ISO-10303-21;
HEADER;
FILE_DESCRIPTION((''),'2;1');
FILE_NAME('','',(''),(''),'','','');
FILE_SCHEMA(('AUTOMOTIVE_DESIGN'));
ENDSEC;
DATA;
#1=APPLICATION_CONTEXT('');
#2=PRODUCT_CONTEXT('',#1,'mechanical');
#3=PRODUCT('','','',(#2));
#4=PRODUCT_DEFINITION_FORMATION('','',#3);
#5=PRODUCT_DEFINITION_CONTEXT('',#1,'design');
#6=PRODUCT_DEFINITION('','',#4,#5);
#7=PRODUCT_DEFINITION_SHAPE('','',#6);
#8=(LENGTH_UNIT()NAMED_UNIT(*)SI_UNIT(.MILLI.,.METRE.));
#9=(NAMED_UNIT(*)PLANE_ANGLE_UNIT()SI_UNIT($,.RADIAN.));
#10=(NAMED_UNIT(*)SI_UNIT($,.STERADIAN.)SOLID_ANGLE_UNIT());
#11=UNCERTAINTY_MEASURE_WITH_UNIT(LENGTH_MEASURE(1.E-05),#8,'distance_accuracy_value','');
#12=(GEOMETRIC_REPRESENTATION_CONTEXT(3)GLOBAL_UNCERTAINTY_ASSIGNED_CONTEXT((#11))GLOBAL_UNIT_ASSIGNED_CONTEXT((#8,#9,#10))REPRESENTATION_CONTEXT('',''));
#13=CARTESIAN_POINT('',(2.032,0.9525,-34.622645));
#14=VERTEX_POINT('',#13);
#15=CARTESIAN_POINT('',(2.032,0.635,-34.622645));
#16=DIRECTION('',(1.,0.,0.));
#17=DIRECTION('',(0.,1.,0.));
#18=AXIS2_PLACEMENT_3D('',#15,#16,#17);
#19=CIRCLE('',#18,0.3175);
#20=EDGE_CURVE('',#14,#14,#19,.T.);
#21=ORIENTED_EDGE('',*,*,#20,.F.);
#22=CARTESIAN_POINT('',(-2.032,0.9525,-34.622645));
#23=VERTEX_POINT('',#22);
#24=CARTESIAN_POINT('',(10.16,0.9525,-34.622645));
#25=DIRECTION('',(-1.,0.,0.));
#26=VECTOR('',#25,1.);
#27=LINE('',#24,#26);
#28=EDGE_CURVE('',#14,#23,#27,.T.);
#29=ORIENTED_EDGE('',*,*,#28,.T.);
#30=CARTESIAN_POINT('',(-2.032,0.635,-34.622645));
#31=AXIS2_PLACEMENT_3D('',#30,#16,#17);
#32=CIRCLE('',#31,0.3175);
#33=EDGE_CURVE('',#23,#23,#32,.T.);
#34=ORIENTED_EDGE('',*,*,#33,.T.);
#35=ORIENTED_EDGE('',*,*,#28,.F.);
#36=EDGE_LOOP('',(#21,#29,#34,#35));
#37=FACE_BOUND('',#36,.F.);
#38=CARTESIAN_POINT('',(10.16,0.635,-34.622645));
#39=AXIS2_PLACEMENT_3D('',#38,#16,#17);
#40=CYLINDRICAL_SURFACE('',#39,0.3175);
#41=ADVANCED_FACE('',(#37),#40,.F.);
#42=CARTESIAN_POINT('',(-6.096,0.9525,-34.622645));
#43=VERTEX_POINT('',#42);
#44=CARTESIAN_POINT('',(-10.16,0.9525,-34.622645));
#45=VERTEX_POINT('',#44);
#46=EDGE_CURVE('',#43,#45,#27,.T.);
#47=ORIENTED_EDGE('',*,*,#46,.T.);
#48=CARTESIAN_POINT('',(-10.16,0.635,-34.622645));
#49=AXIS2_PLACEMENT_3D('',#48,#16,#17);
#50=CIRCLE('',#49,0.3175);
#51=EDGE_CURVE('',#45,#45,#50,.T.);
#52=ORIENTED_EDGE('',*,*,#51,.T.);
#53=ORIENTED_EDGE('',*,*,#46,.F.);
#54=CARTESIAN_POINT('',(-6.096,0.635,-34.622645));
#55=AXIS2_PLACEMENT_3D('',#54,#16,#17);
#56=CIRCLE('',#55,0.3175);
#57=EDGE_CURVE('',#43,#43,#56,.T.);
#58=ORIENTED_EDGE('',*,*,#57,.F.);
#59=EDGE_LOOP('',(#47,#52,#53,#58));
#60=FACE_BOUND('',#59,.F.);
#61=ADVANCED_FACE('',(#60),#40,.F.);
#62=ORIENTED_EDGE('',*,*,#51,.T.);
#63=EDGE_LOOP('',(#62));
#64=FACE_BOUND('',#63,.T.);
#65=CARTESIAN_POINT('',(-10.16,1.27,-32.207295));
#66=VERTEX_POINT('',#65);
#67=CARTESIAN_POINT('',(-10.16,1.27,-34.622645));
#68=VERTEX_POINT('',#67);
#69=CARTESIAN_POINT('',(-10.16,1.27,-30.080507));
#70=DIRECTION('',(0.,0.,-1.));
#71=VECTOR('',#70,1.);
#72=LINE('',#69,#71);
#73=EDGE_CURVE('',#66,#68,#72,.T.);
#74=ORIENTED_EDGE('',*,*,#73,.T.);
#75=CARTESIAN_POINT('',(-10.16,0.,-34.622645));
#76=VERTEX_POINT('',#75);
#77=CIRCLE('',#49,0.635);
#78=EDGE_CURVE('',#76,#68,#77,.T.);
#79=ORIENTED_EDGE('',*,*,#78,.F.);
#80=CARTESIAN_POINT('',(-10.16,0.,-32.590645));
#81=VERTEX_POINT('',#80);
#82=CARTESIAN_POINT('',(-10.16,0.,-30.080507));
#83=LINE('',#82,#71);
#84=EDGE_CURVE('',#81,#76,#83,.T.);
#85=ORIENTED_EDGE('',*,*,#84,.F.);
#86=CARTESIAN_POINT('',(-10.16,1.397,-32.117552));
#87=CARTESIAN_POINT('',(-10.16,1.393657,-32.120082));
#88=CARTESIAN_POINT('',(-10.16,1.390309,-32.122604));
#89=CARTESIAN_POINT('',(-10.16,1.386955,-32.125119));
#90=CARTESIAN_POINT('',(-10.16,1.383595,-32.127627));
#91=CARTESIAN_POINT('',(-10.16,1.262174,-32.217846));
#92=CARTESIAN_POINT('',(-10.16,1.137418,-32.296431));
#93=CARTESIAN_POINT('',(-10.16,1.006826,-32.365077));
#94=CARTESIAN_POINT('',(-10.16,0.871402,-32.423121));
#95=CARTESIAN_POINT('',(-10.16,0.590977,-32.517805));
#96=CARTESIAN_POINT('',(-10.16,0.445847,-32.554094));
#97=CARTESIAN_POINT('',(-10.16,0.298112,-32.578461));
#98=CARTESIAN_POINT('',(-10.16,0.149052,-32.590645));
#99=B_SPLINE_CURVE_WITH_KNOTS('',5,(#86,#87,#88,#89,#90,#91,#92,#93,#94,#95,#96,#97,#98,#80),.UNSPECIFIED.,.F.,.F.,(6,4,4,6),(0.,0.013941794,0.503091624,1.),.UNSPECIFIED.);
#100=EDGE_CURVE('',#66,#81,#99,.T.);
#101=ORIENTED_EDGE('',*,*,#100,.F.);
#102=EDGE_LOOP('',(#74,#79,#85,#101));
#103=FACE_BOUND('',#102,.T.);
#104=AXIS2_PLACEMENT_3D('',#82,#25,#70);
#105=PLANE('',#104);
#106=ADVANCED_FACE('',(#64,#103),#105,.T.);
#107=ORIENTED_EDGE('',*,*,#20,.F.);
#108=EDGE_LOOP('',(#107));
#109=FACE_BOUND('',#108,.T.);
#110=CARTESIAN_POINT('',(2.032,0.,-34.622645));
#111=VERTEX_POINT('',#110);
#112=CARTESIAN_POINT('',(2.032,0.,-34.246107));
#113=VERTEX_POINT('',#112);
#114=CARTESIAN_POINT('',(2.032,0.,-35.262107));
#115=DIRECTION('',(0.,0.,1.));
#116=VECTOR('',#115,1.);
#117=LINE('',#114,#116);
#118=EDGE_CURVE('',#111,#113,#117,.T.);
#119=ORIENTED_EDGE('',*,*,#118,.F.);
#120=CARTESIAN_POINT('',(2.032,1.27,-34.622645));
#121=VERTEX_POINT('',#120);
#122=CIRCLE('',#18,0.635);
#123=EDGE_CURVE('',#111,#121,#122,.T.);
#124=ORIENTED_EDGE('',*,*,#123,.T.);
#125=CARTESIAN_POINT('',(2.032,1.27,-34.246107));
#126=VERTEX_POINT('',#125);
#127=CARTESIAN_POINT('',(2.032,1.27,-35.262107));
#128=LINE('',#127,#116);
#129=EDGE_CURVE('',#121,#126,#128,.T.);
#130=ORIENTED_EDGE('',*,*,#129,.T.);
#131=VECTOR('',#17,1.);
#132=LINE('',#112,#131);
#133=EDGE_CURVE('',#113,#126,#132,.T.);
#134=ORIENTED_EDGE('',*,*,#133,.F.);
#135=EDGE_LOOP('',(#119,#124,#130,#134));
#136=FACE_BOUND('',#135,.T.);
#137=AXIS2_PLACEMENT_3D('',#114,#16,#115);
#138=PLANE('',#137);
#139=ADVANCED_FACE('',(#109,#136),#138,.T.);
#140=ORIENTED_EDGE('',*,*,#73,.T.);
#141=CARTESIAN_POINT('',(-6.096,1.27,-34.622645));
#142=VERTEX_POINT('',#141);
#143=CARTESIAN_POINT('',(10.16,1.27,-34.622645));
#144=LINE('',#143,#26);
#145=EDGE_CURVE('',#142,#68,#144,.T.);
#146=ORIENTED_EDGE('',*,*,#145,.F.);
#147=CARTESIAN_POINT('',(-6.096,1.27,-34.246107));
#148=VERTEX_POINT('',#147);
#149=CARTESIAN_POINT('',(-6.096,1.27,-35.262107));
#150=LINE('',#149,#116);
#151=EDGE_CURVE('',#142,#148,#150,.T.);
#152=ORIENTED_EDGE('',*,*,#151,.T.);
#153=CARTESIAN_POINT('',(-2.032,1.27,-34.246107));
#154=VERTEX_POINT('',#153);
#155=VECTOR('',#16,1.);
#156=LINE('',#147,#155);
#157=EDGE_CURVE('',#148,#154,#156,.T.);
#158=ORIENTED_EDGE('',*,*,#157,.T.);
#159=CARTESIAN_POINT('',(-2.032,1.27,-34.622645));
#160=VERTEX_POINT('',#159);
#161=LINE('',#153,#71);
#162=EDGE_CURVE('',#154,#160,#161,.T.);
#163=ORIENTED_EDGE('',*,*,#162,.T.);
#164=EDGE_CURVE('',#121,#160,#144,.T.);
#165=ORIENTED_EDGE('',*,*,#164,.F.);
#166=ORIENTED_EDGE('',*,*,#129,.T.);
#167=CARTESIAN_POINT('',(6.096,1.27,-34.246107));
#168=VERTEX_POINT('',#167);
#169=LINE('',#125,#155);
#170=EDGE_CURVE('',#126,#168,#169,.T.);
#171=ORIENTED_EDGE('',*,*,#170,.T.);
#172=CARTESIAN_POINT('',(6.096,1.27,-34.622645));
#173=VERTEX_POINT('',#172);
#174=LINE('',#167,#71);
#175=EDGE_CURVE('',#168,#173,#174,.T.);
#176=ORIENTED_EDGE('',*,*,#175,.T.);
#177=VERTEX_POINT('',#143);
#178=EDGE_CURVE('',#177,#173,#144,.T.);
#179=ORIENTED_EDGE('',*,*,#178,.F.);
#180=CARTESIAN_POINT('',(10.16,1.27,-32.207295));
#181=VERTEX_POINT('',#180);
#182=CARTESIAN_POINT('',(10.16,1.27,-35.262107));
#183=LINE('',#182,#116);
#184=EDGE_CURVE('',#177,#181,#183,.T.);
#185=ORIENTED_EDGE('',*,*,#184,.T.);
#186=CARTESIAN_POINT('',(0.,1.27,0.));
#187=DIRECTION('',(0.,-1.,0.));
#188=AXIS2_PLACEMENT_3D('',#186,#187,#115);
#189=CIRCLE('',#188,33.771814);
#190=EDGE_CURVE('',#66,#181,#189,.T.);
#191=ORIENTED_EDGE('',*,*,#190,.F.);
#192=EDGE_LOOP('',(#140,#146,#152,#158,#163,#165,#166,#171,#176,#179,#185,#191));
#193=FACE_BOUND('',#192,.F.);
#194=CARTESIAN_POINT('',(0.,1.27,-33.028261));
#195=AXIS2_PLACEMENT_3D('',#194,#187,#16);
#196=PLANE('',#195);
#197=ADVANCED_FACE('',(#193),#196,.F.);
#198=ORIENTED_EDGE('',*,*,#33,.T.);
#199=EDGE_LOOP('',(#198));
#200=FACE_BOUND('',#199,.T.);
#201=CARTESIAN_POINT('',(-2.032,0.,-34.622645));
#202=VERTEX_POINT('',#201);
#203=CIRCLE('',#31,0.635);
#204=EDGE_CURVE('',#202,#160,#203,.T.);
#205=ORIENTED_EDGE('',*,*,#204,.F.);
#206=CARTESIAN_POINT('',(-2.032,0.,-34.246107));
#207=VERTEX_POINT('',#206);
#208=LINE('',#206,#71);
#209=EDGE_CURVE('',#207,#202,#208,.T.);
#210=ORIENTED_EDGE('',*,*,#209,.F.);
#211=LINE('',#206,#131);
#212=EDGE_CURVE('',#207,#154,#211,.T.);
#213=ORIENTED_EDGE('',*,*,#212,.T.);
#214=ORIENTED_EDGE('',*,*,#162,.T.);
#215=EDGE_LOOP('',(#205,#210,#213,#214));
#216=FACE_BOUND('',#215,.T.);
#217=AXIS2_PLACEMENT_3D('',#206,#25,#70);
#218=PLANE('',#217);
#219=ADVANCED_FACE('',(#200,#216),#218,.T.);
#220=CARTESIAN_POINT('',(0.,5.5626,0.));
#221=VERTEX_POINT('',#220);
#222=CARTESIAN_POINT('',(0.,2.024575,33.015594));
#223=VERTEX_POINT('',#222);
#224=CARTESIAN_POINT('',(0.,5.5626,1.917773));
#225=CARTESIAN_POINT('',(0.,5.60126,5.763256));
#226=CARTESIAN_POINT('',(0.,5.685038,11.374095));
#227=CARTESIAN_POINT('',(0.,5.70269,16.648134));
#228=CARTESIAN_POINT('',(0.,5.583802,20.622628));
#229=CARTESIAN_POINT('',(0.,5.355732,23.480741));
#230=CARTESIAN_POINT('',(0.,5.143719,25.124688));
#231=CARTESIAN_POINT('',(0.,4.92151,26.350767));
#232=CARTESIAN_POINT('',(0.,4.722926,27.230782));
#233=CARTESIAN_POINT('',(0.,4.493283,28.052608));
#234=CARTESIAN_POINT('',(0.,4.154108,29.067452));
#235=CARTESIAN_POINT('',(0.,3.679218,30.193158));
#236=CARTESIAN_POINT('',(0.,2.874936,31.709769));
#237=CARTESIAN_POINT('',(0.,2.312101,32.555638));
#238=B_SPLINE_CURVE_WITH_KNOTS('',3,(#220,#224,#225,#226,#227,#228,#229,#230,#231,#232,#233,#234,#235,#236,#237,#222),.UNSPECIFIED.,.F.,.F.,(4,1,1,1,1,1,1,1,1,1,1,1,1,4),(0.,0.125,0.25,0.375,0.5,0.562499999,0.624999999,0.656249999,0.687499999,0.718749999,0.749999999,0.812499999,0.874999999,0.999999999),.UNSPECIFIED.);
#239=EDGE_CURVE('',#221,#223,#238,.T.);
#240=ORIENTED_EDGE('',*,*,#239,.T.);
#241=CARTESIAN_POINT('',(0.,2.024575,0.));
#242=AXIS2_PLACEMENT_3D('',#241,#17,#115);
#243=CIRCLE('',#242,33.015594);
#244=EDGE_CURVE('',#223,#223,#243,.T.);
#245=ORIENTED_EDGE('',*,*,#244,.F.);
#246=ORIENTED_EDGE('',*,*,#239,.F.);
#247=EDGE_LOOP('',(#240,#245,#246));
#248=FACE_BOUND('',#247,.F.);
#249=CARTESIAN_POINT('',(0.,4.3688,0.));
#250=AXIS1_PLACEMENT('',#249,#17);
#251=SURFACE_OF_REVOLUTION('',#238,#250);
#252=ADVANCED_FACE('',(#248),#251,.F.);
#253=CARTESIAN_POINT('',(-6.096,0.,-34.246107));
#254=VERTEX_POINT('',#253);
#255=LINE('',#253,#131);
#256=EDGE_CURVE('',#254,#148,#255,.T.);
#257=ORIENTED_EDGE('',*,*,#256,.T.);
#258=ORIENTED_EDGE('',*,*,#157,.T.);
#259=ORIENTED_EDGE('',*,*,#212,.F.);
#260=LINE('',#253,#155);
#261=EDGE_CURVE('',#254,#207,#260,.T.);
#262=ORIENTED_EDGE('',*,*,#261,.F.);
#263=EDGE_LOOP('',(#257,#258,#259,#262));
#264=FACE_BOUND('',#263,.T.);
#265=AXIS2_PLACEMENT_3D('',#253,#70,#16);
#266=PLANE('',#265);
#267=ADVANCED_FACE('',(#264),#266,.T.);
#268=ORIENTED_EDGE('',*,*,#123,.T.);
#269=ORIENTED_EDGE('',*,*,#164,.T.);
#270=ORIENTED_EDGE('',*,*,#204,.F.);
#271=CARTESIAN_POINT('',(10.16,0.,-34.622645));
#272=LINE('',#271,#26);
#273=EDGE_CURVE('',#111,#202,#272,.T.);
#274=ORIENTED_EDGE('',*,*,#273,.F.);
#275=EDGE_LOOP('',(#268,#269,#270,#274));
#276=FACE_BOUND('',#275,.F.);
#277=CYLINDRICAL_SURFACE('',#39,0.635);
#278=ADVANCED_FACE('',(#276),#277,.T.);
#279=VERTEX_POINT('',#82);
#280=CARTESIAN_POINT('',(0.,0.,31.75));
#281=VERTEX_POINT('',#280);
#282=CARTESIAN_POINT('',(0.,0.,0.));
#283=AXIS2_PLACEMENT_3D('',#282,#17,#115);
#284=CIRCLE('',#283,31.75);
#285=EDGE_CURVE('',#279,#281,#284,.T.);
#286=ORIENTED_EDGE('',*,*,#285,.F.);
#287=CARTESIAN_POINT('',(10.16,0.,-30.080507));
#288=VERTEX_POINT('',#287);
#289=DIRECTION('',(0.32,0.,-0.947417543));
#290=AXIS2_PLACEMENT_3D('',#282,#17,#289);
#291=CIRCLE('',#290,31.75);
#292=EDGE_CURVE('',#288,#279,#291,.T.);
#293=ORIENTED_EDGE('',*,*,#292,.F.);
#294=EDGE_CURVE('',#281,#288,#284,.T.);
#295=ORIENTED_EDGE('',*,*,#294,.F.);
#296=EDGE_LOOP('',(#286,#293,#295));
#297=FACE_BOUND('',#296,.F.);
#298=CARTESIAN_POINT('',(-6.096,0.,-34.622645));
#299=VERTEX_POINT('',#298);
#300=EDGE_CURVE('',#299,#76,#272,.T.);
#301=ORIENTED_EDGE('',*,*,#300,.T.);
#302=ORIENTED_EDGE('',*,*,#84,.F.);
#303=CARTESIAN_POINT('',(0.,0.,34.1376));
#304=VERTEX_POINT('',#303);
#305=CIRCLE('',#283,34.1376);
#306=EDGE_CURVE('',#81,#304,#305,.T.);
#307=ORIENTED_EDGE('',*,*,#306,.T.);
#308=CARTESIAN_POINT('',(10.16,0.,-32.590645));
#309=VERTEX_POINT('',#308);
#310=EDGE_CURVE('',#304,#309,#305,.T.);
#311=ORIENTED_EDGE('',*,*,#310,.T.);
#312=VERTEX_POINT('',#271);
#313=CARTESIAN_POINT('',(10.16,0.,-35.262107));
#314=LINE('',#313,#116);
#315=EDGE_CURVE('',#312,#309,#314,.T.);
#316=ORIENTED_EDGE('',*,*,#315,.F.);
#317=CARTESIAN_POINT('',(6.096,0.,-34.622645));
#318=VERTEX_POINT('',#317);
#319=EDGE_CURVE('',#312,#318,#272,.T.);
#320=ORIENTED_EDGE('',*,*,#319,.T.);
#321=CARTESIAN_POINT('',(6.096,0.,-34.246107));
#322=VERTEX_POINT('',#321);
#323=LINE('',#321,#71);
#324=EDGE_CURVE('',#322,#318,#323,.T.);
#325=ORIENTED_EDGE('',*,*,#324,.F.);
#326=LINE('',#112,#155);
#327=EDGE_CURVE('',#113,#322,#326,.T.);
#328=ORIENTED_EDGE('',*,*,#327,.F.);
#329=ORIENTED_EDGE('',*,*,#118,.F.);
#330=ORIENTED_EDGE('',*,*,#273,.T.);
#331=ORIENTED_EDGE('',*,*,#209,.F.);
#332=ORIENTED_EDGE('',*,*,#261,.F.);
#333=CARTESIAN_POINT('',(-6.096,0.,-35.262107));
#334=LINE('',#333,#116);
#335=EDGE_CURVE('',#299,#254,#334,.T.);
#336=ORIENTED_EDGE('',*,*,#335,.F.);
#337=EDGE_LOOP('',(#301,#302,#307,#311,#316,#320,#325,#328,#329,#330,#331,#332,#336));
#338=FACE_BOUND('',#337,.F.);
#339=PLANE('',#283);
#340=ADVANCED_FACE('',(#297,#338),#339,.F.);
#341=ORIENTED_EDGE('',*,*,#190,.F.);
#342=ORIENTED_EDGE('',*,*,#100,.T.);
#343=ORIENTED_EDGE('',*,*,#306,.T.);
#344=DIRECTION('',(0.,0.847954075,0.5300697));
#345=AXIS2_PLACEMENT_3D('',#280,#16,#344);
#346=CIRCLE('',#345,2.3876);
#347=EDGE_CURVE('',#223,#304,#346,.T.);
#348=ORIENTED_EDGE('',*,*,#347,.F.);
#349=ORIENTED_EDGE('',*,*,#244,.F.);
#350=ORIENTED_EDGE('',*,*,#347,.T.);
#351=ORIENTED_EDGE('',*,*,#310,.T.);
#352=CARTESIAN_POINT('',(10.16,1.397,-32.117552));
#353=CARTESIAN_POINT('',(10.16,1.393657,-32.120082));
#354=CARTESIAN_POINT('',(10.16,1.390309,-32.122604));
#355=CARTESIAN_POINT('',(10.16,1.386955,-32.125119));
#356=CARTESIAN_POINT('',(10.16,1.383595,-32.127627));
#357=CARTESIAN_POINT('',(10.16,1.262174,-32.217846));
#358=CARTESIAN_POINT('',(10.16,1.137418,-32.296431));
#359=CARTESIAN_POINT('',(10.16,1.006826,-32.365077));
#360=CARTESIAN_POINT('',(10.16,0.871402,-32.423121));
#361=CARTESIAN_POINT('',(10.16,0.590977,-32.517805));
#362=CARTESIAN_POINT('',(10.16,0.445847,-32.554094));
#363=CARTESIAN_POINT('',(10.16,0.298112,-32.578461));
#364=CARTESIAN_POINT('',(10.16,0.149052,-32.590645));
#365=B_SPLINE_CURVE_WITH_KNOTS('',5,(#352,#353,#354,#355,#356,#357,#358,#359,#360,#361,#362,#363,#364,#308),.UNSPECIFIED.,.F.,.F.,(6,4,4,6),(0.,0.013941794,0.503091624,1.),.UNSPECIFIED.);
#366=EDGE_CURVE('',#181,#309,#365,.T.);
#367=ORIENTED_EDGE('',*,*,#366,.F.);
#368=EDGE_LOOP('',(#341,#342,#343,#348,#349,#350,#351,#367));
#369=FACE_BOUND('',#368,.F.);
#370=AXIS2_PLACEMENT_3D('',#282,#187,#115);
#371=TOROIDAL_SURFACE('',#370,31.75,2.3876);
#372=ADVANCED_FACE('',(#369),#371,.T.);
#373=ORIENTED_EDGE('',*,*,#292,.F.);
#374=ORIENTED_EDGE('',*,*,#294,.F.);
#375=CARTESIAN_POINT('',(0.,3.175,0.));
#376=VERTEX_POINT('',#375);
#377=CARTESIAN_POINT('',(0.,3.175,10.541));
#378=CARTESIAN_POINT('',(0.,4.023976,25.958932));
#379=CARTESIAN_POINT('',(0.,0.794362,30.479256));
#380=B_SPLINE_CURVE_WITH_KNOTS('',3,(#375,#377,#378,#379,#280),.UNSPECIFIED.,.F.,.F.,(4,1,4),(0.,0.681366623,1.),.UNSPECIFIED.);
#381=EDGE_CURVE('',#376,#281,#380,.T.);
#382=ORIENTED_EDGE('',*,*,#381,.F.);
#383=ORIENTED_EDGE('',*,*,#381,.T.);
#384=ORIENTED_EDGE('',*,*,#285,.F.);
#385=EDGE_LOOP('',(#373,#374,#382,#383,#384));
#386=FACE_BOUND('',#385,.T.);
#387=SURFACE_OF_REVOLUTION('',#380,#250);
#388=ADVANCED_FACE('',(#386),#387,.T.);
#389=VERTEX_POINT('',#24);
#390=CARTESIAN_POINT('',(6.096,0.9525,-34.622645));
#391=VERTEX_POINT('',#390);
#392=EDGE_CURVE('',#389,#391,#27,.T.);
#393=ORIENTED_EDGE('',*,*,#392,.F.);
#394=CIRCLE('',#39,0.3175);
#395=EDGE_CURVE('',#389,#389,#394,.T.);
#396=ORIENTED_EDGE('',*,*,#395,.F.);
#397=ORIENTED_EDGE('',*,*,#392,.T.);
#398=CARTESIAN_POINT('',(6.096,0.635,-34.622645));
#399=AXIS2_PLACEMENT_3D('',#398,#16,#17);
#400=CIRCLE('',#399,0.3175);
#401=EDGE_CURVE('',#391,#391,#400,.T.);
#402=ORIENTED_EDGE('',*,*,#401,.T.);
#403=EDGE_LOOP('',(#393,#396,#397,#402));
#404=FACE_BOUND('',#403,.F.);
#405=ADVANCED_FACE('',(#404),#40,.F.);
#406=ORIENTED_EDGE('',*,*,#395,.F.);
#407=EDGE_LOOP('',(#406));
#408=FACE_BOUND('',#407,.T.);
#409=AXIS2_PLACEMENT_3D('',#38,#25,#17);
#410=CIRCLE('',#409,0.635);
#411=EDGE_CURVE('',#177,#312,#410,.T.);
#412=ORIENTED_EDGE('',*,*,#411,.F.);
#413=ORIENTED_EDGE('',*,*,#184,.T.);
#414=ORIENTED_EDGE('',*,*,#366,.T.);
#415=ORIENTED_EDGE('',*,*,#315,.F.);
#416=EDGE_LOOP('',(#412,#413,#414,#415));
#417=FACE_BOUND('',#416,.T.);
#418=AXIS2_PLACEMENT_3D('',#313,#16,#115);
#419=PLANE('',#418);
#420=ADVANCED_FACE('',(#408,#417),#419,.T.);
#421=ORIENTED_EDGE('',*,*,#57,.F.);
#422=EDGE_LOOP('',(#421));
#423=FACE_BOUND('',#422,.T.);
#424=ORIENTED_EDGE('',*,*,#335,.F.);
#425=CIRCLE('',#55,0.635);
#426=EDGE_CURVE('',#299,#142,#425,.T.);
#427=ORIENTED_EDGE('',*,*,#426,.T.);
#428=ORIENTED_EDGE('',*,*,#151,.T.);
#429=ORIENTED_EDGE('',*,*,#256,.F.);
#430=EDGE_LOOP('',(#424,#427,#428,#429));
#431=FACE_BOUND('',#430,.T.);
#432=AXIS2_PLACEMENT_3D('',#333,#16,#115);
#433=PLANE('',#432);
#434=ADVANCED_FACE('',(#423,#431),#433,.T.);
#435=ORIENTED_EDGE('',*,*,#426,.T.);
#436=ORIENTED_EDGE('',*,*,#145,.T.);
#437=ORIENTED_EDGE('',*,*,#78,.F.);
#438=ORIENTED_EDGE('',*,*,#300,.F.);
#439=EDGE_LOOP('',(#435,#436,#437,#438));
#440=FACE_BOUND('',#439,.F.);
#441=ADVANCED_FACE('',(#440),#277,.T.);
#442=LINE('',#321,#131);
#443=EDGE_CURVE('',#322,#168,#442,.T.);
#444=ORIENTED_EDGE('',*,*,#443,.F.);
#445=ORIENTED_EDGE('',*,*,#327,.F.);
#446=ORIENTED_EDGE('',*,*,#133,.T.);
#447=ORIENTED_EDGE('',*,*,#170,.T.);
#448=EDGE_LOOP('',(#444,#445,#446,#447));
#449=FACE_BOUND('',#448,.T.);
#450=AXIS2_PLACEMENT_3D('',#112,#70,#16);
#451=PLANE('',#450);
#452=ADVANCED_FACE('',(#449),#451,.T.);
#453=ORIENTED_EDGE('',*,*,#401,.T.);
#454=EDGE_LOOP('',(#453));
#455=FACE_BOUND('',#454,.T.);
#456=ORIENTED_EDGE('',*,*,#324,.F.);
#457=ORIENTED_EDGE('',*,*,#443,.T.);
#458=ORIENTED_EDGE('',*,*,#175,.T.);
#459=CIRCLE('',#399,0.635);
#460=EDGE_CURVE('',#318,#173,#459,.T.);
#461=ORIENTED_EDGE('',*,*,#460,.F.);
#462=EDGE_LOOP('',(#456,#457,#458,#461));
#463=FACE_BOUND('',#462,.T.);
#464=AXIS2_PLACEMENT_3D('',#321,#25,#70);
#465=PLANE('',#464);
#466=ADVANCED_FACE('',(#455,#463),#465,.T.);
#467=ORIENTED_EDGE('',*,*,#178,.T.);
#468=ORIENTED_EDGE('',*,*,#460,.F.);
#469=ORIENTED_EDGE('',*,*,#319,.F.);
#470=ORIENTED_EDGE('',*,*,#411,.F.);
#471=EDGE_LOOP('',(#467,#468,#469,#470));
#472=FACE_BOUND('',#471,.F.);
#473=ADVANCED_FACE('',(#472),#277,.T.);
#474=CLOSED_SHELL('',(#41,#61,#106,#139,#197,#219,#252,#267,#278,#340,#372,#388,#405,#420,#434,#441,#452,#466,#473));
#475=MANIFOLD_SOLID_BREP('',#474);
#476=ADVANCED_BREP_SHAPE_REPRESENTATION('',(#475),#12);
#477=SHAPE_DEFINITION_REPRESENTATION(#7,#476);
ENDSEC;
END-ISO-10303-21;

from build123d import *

# Parameters (mm, degrees)
F3_DEPTH = 1.27
F4_R     = 0.3175
F5_DEPTH = 44.2986001


# Not quite as in the source:
# - the dataset's text gives a spline's control points without its knots; the knots are read off the source's solid


with BuildPart() as f1:
    # F0 (on Right) → F1 (revolve)
    with BuildSketch(Plane.YZ):
        with BuildLine():
            add(Edge.make_bspline(
                [(3.175, 0), (3.175, 10.541), (4.0239762357, 25.9589322905), (0.7943624519, 30.4792560231), (0, 31.75)],
                knots=[0, 0, 0, 0, 0.6813666235, 1, 1, 1, 1], degree=3))
            Line((3.175, 0), (5.5626, 0))
            add(Edge.make_bspline(
                [(5.5626, 0), (5.5626, 1.9177725401), (5.6012595175, 5.763256361), (5.6850380944, 11.3740945743), (5.7026900101, 16.6481342132), (5.5838020802, 20.622627977), (5.3557319657, 23.480741035), (5.1437190397, 25.1246883423), (4.9215103036, 26.3507670581), (4.7229256392, 27.2307815663), (4.4932831777, 28.052608441), (4.1541081797, 29.0674517161), (3.6792176979, 30.1931579589), (2.8749355371, 31.7097687785), (2.3121014901, 32.5556376731), (2.0245751497, 33.015594415)],
                knots=[0, 0, 0, 0, 0.1249999999, 0.2499999998, 0.3749999996, 0.4999999995, 0.5624999995, 0.6249999994, 0.6562499994, 0.6874999993, 0.7187499993, 0.7499999993, 0.8124999992, 0.8749999991, 0.999999999, 0.999999999, 0.999999999, 0.999999999], degree=3))
            ThreePointArc((2.0245751497, 33.015594415), (1.1573462176, 33.8383446776), (0, 34.1376))
            Line((0, 34.1376), (0, 31.75))
        make_face()
    revolve(axis=Axis((0, 4.3688, 0), (0, 1, 0)))

    # F2 (on face) → F3 (join)
    with BuildSketch(Plane.XZ):
        with BuildLine():
            ThreePointArc((10.16, -30.0805069771), (0, -31.75), (-10.16, -30.0805069771))
            Line((-10.16, -30.0805069771), (-10.16, -35.2621069771))
            Line((-10.16, -35.2621069771), (-6.096, -35.2621069771))
            Line((-6.096, -35.2621069771), (-6.096, -34.2461069771))
            Line((-6.096, -34.2461069771), (-2.032, -34.2461069771))
            Line((-2.032, -34.2461069771), (-2.032, -35.2621069771))
            Line((-2.032, -35.2621069771), (2.032, -35.2621069771))
            Line((2.032, -35.2621069771), (2.032, -34.2461069771))
            Line((2.032, -34.2461069771), (6.096, -34.2461069771))
            Line((6.096, -34.2461069771), (6.096, -35.2621069771))
            Line((6.096, -35.2621069771), (10.16, -35.2621069771))
            Line((10.16, -35.2621069771), (10.16, -30.0805069771))
        make_face()
    extrude(amount=-F3_DEPTH)

    # F4 (on face) → F5 (cut, through all)
    with BuildSketch(Plane.YZ.offset(10.16)):
        with Locations((0.635, -34.622644881)):
            Circle(F4_R)
        with BuildLine():
            ThreePointArc((1.27, -34.622644881), (0.635, -35.257644881), (0, -34.622644881))
            Line((0, -34.622644881), (0, -35.2621069771))
            Line((0, -35.2621069771), (1.27, -35.2621069771))
            Line((1.27, -35.2621069771), (1.27, -34.622644881))
        make_face()
    extrude(amount=-F5_DEPTH, mode=Mode.SUBTRACT)


solid = f1.part
